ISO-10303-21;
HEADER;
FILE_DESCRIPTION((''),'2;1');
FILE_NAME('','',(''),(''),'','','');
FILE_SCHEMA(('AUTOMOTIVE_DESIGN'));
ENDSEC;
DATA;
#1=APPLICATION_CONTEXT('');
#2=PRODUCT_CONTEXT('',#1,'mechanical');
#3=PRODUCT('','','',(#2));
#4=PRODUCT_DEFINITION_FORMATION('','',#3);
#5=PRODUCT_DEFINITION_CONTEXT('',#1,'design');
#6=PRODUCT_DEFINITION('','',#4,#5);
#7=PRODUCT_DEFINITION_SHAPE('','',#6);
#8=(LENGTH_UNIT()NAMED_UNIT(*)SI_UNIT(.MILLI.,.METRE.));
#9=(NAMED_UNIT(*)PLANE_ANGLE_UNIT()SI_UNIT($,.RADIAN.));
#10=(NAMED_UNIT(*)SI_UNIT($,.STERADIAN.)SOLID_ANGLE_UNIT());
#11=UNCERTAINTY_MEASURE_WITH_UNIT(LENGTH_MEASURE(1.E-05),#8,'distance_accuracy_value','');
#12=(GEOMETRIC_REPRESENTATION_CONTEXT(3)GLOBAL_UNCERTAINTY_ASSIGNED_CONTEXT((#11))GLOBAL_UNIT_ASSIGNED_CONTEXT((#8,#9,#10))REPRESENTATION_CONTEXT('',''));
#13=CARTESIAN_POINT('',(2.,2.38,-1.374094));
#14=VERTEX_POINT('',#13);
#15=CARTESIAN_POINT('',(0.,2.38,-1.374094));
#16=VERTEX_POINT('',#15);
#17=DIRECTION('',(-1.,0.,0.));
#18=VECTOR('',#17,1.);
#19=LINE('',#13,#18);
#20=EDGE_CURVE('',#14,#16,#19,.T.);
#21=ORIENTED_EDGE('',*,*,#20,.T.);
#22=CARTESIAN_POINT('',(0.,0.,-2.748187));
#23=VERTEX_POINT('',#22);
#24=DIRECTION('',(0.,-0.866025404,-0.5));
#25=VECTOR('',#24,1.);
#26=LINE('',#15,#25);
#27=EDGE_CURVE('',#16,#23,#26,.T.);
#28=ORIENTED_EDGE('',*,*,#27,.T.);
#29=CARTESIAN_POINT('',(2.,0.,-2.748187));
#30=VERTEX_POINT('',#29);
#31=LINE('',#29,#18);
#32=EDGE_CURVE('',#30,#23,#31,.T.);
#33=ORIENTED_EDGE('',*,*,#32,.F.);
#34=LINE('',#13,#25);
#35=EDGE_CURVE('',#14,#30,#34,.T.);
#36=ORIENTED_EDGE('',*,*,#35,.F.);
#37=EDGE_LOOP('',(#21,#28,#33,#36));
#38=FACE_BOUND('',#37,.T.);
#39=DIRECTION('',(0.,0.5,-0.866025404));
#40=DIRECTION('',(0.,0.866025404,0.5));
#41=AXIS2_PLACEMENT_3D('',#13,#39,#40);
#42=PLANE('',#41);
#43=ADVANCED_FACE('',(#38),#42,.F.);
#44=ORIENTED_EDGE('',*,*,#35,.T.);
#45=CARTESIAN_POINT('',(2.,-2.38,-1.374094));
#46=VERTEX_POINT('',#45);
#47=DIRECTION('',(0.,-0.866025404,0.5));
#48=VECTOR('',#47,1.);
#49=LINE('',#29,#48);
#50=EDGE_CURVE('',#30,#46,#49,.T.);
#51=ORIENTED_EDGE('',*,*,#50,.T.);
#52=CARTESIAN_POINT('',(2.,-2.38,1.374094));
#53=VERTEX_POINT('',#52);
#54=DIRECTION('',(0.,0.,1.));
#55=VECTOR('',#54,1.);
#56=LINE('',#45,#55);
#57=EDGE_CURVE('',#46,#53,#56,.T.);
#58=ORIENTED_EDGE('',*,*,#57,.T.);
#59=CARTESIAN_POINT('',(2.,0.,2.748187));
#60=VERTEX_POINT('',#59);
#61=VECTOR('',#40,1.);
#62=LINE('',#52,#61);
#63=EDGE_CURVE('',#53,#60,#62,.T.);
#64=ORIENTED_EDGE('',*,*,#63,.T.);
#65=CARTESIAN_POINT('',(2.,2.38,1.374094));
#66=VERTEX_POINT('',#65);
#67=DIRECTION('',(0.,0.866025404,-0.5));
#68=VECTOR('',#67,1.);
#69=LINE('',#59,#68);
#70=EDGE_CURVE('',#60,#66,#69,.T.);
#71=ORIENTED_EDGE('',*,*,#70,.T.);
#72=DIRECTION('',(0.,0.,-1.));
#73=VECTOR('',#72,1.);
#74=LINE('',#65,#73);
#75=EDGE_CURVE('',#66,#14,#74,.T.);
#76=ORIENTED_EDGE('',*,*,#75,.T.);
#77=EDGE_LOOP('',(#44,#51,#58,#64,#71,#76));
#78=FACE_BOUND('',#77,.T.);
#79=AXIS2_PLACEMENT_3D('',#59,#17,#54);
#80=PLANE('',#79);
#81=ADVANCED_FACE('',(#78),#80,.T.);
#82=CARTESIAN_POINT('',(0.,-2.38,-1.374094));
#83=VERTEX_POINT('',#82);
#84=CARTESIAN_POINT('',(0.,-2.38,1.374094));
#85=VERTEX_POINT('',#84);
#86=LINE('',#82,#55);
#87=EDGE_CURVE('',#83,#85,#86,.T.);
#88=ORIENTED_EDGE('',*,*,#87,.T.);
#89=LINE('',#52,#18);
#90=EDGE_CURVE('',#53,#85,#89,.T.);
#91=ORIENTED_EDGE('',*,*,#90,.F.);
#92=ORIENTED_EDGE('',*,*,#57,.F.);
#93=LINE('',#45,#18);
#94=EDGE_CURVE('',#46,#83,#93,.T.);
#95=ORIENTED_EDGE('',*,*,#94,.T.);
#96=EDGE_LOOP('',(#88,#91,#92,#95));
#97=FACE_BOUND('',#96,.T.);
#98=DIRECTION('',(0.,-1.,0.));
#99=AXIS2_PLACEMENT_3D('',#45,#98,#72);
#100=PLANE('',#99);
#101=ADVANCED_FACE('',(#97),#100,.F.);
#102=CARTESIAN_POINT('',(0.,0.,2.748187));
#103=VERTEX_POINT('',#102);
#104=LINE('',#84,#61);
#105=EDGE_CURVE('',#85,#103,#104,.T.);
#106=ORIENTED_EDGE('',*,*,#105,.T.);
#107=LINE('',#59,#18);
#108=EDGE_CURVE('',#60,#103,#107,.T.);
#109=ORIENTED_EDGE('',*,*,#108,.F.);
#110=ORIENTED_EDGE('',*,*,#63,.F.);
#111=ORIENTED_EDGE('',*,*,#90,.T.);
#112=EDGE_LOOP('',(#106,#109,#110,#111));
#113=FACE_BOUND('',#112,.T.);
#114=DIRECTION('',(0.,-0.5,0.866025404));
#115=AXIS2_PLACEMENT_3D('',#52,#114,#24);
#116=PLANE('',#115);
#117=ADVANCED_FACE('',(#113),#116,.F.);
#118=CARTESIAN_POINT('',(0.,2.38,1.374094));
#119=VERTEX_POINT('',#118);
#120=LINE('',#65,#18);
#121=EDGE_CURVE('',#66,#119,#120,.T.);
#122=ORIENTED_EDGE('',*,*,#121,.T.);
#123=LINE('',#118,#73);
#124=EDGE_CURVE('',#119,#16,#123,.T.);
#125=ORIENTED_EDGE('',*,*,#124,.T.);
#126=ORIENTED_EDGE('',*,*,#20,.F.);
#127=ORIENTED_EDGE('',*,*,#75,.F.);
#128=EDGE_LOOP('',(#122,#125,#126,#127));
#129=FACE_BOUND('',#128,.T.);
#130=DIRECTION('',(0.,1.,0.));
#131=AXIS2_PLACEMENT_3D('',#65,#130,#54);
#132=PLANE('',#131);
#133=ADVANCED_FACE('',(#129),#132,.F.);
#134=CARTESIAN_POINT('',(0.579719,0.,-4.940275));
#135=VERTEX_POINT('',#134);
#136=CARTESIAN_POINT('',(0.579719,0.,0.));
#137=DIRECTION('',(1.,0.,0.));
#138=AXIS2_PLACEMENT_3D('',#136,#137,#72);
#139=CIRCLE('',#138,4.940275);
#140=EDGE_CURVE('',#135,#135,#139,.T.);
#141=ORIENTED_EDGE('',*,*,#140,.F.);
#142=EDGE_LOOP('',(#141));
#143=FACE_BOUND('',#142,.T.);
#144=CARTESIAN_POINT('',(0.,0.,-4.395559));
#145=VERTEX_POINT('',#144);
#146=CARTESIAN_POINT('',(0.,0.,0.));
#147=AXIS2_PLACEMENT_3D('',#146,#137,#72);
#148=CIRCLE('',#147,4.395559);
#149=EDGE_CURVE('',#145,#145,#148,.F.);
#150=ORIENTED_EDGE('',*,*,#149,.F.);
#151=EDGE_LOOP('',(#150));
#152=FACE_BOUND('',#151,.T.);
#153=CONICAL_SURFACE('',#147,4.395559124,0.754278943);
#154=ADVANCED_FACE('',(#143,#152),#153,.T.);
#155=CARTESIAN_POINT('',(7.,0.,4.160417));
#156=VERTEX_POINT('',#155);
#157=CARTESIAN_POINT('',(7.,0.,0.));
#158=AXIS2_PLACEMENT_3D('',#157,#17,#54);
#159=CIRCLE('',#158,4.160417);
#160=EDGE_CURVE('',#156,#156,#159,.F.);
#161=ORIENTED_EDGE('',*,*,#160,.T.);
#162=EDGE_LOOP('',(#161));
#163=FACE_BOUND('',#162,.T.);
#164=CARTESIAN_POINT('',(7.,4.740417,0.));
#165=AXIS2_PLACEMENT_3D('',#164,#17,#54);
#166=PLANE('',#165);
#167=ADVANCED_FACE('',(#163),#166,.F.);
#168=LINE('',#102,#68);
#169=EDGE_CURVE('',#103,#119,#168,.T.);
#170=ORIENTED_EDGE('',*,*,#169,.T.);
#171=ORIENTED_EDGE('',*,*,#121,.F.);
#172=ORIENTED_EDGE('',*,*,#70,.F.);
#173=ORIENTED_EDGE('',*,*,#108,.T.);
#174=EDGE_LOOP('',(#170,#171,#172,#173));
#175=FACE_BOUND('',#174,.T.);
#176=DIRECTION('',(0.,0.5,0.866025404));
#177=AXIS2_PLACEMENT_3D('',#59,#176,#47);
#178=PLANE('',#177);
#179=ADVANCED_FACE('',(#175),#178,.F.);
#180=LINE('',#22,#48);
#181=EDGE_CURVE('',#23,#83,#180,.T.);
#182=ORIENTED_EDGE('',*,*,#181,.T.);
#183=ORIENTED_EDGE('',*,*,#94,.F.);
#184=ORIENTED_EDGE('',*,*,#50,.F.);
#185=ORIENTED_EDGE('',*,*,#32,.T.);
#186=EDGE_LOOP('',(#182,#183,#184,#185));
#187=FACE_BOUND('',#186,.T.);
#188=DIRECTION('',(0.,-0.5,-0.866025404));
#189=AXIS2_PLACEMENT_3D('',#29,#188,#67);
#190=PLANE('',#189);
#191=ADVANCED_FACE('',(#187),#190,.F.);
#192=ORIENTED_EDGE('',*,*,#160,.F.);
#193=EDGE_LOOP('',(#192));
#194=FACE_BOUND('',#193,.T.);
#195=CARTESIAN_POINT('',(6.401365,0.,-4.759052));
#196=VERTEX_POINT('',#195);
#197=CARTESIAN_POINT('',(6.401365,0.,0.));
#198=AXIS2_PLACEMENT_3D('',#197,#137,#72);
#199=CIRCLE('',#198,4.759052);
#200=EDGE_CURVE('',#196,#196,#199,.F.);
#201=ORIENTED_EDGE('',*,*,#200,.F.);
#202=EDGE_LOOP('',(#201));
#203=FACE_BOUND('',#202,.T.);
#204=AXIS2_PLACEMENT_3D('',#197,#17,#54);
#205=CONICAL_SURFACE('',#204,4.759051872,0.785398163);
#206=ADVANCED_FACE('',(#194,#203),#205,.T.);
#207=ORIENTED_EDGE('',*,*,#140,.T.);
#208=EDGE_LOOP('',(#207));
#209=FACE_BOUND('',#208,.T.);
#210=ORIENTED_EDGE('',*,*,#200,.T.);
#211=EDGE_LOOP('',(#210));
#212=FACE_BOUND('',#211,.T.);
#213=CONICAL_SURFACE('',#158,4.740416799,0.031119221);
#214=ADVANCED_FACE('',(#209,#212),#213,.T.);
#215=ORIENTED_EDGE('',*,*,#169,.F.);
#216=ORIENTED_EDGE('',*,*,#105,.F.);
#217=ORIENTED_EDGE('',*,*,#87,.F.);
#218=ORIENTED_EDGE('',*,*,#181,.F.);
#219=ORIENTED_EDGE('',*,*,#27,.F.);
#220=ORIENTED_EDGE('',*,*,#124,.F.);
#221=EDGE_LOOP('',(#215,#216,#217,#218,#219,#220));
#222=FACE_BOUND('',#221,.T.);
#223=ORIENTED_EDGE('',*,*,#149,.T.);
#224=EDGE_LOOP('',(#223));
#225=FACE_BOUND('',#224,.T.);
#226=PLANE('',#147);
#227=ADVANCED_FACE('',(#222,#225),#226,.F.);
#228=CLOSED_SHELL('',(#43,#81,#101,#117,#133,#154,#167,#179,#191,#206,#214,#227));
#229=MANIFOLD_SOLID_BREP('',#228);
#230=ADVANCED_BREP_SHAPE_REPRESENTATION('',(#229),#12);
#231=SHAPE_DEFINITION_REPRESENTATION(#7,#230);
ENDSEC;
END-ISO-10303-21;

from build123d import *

# Parameters (mm, degrees)
HEX_2_DEPTH = 2


with BuildPart() as part:
    # Threads_Sketch → Threads (revolve)
    with BuildSketch(Plane.XY, mode=Mode.PRIVATE) as threads_sk:
        Polygon((0, 0), (0, 4.958321687), (7, 4.740416799), (7, 0), align=None)
    revolve(threads_sk.sketch.rotate(Axis((-5.91867895, 0, 0), (1, 0, 0)), 90), axis=Axis((-5.91867895, 0, 0), (1, 0, 0)))

    # Threads Cham: read off the stored shape, not the designer's step
    # Threads Cham outline → Threads Cham (revolve, cut)
    with BuildSketch(Plane.YX):
        Polygon((4.160416799, 7), (4.759051872, 6.401364927), (4.759051872, 7), align=None)
        Polygon((4.940275453, 0), (4.940275453, 0.579719185), (4.395559124, 0), align=None)
    revolve(axis=Axis((0, 0, 0), (1, 0, 0)), mode=Mode.SUBTRACT)

    # Threads Cham 2 outline → Threads Cham 2 (revolve, cut)
    with BuildSketch(Plane.YX):
        Polygon((4.940275453, 0.579719185), (4.940275453, 0), (4.958321687, 0), align=None)
    revolve(axis=Axis((0, 0, 0), (1, 0, 0)), mode=Mode.SUBTRACT)

    # Hex_Sketch → Hex 2 (cut)
    with BuildSketch(Plane.ZY):
        Polygon((2.748187281, 0), (1.374093641, 2.38), (-1.374093641, 2.38), (-2.748187281, 0), (-1.374093641, -2.38), (1.374093641, -2.38), align=None)
    extrude(amount=-HEX_2_DEPTH, mode=Mode.SUBTRACT)


solid = part.part
